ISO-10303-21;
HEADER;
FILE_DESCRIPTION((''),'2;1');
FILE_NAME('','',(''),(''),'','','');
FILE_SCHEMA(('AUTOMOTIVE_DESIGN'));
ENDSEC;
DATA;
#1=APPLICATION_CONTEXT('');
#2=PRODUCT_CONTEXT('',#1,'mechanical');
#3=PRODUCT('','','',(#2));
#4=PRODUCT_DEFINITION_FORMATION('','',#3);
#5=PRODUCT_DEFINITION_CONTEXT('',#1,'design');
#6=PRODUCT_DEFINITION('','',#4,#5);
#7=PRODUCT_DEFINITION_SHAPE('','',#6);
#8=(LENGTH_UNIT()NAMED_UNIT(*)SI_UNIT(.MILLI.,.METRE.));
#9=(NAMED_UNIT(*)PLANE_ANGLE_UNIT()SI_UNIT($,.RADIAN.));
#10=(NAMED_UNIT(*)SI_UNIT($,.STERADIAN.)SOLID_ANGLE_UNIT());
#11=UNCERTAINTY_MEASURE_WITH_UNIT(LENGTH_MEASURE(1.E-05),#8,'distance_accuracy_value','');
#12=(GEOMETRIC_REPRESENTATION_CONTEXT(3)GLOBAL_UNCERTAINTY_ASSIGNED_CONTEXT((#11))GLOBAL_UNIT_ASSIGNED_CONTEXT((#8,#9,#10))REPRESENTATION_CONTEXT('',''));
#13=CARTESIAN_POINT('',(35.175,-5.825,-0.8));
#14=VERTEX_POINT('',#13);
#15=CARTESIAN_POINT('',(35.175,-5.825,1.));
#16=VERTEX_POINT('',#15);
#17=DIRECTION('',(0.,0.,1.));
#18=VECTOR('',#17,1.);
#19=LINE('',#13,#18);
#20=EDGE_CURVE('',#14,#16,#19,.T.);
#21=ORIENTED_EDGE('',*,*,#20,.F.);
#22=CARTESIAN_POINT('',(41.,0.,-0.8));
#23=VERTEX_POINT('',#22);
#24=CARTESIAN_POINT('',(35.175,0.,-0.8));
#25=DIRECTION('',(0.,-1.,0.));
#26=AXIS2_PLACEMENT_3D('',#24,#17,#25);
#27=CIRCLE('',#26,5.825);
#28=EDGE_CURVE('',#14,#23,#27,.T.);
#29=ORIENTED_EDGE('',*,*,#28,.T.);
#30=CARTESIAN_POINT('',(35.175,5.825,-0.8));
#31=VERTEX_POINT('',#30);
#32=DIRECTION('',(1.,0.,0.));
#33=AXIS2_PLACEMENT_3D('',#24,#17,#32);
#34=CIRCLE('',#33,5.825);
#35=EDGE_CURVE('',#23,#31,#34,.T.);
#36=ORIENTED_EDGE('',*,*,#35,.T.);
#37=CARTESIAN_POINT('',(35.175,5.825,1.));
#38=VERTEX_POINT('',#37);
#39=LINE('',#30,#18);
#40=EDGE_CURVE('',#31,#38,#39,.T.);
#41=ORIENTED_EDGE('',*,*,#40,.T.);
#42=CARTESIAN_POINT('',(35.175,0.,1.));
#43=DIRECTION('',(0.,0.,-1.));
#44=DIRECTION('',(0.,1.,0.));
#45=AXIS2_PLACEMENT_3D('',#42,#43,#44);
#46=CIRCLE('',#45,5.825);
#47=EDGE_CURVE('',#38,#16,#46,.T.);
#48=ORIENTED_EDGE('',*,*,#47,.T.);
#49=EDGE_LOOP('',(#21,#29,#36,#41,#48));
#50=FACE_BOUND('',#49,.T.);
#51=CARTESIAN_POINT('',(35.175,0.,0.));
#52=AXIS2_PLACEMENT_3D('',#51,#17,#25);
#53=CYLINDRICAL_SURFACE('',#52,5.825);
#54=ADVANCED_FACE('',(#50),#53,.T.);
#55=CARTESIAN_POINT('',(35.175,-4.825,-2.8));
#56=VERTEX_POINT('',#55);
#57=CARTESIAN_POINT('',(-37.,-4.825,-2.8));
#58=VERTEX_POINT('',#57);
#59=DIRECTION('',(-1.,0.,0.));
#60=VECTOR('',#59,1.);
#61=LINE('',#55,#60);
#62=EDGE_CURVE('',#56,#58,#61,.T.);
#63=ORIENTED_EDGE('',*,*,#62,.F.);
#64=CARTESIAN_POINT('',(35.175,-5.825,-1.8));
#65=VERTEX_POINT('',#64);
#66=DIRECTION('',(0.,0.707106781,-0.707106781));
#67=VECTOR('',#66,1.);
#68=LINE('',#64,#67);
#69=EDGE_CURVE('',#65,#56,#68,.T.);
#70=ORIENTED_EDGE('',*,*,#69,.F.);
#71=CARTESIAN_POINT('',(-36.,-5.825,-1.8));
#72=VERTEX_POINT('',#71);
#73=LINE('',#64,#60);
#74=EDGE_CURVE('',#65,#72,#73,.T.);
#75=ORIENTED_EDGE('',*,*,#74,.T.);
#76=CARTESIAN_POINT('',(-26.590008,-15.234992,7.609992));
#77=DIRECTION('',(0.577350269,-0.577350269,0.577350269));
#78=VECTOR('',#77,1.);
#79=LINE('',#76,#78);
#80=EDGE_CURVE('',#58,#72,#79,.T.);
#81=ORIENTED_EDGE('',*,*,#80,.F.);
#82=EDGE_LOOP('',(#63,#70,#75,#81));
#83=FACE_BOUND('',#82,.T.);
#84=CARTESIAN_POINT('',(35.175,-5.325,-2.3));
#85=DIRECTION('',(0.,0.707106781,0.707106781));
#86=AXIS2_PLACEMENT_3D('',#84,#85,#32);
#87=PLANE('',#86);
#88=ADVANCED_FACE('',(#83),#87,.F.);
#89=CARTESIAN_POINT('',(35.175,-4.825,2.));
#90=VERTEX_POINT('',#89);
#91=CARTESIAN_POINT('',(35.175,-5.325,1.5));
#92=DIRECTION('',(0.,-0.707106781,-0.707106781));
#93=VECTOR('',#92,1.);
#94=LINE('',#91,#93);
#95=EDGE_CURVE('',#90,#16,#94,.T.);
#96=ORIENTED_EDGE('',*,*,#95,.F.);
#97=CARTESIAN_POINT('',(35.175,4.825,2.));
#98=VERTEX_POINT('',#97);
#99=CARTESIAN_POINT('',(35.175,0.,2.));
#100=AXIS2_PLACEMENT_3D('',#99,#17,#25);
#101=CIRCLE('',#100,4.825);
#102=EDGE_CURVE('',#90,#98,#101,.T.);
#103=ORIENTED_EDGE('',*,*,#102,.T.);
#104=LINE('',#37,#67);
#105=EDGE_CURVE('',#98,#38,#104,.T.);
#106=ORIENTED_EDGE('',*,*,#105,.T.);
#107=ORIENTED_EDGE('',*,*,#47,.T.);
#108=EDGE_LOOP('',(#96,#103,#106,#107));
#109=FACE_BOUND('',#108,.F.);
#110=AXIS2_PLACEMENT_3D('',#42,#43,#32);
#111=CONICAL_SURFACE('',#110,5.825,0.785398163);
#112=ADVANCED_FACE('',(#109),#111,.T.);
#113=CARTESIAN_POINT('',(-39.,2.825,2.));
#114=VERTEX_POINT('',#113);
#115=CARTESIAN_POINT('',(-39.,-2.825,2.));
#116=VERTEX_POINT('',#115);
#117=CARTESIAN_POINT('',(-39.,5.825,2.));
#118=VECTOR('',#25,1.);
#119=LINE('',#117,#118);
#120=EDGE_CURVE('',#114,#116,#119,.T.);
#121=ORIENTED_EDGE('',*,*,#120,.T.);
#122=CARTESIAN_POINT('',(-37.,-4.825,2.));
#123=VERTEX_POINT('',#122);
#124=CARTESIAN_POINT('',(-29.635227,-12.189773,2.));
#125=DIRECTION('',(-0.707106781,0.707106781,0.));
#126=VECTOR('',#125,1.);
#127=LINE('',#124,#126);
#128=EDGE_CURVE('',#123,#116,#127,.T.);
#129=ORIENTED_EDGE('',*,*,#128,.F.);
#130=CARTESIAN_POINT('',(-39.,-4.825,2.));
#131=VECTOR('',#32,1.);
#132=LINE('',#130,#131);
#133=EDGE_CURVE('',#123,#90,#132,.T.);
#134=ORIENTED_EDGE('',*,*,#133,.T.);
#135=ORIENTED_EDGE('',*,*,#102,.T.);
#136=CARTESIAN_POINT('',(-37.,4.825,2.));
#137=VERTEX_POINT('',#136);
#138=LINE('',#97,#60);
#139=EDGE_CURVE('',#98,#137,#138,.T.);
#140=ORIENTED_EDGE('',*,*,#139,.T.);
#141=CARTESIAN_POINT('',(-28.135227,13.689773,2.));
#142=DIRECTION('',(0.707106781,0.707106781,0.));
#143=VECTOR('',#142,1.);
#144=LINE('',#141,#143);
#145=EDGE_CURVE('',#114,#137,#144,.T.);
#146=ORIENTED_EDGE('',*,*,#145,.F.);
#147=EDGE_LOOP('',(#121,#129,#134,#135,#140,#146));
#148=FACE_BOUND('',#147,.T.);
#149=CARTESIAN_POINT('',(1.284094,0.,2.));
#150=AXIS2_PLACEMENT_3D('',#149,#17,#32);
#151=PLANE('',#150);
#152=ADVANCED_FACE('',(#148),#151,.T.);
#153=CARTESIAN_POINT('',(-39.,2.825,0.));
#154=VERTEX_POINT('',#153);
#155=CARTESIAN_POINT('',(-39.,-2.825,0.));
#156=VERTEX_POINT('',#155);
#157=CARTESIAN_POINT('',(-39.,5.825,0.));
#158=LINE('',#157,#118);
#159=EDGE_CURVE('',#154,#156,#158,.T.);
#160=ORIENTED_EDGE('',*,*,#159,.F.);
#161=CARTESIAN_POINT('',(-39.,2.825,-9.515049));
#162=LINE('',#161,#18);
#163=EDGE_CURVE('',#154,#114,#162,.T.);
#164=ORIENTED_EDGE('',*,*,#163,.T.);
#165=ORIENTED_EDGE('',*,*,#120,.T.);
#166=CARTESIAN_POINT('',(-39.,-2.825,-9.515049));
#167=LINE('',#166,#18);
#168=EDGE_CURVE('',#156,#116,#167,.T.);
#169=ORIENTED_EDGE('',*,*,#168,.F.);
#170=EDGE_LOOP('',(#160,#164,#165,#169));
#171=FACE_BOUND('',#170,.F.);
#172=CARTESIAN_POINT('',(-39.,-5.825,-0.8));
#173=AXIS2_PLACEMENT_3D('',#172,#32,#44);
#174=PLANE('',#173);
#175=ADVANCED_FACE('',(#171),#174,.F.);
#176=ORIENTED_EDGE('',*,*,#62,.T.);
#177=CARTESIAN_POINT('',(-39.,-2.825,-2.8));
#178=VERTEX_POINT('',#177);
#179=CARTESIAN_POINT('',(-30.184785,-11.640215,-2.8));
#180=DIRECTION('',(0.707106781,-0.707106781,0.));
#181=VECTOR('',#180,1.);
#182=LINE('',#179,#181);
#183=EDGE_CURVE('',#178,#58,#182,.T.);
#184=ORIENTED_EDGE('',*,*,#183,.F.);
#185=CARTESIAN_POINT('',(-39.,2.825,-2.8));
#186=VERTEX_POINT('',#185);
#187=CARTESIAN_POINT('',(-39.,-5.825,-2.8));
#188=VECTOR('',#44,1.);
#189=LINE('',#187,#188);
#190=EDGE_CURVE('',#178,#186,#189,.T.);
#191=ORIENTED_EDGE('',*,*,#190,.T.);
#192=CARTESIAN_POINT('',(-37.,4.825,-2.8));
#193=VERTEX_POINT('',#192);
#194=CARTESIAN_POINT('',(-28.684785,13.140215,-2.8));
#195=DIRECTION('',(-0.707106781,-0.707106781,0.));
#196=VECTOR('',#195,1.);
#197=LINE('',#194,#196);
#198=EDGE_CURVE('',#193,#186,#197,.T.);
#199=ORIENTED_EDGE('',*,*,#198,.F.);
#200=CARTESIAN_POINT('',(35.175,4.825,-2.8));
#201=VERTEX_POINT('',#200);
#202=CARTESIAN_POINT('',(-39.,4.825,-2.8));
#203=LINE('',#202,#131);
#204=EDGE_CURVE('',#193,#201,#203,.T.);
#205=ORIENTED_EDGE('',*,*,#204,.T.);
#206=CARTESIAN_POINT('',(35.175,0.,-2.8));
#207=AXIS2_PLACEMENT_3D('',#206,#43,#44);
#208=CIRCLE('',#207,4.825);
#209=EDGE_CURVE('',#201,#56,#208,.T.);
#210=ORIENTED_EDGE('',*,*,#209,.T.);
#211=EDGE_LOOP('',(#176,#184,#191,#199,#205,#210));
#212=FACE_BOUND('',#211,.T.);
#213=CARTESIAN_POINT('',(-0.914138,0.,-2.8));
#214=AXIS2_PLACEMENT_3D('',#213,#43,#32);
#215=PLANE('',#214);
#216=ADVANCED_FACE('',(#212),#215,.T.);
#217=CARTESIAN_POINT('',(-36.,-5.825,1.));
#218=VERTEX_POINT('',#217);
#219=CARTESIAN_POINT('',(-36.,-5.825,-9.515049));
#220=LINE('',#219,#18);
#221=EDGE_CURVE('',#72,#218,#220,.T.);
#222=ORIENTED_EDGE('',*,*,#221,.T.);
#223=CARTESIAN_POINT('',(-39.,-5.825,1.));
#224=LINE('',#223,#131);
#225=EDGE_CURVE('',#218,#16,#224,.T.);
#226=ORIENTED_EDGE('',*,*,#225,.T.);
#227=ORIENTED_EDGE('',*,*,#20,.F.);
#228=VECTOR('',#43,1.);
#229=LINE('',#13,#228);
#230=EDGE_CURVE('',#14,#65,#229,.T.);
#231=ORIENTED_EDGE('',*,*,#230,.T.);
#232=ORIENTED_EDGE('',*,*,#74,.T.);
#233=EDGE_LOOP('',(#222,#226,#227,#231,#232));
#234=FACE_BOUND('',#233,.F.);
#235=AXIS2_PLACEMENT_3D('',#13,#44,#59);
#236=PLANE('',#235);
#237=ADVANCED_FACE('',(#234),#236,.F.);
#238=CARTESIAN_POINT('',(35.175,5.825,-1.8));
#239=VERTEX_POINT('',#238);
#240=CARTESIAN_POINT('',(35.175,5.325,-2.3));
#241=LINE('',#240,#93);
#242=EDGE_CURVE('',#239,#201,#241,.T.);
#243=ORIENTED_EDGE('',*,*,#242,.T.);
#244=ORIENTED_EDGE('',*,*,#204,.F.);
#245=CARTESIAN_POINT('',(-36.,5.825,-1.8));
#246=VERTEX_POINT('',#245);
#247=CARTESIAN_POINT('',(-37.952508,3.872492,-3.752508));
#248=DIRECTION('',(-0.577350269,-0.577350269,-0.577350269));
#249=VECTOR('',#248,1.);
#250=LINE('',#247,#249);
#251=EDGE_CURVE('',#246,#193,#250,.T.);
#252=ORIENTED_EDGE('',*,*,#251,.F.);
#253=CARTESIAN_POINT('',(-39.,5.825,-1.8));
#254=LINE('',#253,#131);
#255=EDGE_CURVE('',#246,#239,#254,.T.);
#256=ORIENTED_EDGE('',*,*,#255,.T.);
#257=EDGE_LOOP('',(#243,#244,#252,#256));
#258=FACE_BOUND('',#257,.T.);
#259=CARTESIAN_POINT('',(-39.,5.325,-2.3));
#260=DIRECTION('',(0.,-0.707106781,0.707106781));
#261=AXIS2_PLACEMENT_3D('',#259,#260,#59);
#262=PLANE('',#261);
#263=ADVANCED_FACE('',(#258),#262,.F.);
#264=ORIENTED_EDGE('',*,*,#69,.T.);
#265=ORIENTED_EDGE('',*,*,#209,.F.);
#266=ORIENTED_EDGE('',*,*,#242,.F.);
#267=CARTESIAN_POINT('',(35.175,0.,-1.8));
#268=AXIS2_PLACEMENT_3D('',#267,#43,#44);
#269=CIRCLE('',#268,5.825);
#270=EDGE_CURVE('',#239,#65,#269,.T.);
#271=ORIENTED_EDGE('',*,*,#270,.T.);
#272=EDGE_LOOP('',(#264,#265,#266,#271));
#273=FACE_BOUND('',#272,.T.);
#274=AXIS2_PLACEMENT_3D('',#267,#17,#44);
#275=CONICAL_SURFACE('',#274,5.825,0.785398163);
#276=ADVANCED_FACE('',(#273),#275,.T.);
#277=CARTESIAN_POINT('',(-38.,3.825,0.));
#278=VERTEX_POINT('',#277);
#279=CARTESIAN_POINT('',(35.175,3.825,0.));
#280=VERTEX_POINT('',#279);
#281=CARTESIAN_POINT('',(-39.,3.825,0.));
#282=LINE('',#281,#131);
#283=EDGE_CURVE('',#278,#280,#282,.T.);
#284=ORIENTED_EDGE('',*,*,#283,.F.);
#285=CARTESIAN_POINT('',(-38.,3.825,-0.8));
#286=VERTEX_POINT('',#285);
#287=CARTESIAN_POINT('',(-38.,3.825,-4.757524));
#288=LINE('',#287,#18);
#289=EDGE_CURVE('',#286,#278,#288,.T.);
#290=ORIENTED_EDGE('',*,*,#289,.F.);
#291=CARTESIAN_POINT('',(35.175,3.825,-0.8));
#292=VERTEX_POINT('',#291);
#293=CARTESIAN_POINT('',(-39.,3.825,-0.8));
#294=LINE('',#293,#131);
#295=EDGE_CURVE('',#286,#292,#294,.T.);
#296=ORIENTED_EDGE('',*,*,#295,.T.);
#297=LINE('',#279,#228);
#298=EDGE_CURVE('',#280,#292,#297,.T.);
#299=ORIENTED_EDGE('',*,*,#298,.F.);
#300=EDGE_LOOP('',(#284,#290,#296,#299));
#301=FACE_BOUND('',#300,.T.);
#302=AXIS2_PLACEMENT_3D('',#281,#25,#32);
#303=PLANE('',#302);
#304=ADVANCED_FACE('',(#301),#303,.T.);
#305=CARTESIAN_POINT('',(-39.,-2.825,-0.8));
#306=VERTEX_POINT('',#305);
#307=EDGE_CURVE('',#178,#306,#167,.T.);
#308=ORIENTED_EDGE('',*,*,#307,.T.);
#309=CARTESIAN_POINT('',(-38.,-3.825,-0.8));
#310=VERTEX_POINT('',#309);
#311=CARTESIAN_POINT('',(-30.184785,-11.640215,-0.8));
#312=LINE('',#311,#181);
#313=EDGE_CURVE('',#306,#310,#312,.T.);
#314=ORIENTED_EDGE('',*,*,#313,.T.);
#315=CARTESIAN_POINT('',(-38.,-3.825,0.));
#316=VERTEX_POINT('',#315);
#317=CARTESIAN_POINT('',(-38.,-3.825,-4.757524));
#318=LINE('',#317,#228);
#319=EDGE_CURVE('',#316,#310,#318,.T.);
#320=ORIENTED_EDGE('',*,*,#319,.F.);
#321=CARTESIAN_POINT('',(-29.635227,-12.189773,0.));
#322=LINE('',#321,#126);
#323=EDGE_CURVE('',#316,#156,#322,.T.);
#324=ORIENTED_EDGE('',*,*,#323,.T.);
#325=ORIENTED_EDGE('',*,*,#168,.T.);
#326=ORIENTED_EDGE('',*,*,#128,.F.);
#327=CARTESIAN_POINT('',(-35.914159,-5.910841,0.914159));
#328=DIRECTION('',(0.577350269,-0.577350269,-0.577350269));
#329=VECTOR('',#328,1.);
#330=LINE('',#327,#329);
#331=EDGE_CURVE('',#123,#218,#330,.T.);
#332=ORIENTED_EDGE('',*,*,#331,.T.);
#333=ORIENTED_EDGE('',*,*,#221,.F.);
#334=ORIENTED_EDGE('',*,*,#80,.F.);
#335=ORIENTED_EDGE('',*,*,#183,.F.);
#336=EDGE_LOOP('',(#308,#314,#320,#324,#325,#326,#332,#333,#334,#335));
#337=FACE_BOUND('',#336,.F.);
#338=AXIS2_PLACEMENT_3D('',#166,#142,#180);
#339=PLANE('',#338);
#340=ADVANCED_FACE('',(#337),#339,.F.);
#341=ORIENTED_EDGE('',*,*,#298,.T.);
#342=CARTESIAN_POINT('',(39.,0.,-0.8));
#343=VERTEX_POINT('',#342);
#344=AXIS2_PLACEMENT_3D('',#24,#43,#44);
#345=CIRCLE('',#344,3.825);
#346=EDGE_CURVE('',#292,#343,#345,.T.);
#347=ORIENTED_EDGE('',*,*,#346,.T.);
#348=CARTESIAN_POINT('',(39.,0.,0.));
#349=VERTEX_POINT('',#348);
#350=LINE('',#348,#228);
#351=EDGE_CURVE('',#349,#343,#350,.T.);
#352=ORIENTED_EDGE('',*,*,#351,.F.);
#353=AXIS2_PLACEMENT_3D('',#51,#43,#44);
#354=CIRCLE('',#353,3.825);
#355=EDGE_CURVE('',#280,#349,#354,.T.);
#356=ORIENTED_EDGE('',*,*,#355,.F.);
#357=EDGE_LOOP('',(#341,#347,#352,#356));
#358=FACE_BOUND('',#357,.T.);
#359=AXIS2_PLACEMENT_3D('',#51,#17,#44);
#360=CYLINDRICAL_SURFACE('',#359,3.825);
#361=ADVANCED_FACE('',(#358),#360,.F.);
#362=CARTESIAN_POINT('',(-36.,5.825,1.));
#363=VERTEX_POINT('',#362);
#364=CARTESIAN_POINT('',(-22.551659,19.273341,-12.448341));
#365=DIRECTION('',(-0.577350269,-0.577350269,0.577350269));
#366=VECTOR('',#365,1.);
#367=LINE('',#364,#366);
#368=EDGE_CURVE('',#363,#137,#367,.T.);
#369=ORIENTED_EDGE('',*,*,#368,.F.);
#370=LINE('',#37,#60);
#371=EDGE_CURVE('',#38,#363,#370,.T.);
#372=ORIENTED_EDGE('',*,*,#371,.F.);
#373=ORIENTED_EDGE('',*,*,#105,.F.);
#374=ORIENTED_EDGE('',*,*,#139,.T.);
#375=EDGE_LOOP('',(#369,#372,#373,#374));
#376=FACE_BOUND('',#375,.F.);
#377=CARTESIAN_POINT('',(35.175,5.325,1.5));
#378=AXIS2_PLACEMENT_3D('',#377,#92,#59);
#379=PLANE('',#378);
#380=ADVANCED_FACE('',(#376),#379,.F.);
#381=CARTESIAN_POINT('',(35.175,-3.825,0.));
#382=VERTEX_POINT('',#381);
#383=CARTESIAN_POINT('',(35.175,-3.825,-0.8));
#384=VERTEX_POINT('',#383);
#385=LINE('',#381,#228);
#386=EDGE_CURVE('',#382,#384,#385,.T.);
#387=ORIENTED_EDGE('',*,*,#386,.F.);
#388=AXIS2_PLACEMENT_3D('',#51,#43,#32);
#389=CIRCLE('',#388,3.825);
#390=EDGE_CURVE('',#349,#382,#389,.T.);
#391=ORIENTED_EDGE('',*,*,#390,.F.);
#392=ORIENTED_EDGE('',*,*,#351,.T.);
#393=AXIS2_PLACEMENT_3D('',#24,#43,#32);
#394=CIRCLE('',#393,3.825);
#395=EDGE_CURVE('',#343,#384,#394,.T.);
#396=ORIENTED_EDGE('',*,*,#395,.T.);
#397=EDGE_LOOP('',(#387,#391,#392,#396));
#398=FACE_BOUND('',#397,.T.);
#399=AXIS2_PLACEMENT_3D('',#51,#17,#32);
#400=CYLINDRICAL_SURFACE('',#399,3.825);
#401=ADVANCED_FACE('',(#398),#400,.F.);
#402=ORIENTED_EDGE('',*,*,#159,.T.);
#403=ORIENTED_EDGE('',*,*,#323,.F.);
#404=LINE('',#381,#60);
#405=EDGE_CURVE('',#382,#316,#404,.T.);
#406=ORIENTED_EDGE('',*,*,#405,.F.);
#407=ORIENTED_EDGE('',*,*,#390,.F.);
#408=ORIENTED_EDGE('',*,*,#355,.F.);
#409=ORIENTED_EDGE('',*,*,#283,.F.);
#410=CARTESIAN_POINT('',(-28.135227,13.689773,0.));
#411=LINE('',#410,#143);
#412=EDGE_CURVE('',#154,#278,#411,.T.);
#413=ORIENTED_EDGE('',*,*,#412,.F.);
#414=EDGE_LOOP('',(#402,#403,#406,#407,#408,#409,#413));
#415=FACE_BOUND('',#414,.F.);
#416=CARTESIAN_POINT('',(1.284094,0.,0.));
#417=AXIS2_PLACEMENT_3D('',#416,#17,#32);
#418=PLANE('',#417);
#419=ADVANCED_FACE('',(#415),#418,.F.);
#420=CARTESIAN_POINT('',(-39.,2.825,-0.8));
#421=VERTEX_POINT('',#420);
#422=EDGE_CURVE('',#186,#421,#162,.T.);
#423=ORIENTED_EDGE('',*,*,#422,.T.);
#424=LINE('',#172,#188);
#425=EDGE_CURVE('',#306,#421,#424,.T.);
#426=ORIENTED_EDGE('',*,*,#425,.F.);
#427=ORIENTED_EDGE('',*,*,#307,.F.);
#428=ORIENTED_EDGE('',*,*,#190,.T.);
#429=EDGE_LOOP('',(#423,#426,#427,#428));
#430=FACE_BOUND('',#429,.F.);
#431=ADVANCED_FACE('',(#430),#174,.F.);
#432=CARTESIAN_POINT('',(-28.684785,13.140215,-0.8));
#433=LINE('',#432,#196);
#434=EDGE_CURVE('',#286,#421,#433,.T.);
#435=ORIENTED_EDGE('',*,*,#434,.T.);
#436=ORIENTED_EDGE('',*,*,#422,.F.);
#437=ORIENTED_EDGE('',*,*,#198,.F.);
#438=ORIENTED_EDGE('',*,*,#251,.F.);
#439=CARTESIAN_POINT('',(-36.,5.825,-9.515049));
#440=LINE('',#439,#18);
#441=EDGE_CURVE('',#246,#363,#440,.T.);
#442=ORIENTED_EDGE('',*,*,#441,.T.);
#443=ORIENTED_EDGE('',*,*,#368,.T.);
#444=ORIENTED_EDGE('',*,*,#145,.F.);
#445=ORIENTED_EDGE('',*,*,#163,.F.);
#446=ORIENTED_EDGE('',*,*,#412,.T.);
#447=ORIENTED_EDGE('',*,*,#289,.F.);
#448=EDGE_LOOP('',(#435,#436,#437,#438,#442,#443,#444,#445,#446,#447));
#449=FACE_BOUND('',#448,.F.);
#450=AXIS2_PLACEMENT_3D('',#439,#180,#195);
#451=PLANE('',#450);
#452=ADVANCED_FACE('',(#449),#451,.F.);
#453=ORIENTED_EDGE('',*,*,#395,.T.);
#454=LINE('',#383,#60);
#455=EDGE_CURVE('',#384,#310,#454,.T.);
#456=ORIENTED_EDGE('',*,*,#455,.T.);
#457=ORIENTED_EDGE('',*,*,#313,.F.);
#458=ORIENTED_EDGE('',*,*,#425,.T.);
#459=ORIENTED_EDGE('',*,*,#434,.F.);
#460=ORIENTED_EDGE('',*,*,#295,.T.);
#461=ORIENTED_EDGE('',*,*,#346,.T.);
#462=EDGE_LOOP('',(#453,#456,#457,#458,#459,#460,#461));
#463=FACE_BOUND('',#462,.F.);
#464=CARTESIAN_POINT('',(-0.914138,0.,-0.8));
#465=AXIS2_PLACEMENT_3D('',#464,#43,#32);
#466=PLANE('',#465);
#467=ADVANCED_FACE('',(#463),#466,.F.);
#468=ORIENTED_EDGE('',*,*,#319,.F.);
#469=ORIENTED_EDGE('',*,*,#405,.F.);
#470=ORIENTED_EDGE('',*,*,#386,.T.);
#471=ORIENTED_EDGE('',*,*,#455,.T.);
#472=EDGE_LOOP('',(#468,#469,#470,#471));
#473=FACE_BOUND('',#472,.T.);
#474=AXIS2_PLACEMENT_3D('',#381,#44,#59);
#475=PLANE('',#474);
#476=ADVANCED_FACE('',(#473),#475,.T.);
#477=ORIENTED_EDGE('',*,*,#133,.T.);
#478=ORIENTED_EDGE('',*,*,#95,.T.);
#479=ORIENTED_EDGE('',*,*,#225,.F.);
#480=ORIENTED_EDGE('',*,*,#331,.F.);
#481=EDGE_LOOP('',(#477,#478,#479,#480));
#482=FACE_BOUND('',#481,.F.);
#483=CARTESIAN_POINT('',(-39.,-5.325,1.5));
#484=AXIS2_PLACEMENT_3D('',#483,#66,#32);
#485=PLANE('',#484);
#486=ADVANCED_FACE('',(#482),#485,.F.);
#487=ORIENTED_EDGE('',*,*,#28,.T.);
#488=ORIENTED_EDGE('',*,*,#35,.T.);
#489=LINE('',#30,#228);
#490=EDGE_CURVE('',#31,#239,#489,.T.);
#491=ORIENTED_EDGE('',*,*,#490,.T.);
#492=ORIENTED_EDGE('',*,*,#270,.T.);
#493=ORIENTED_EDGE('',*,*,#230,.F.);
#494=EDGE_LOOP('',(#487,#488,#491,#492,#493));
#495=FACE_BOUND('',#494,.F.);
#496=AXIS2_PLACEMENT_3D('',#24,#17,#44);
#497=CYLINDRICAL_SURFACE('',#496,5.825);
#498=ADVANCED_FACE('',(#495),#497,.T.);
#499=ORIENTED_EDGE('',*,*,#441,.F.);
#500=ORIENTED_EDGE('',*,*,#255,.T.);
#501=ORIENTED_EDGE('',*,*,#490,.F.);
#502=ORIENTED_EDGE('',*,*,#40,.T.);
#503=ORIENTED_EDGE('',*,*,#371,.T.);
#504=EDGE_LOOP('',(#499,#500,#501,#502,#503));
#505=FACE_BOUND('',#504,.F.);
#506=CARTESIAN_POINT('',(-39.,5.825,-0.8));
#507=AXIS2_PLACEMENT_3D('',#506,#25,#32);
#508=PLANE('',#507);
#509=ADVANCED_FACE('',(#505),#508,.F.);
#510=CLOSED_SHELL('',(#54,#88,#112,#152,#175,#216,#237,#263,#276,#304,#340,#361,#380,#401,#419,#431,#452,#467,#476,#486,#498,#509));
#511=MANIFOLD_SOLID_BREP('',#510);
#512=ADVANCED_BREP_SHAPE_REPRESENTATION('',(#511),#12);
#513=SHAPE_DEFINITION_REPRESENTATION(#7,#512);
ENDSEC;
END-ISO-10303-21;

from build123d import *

# Parameters (mm, degrees)
F1_DEPTH    = 2
F2_DEPTH    = 0.8
F4_DEPTH    = 2
F5_SIZE     = 1
F6_T1_DEPTH = 18.2300979278


# Not quite as in the source:
# - a fillet or chamfer that OpenCascade refuses, or shapes differently, is made with other operations: its cross-section is extruded or revolved along the edge and cut away or added


with BuildPart() as f1:
    # F0 (on Top) → F1 (new body)
    with BuildSketch(Plane.XY):
        with BuildLine():
            Line((35.175, -3.825), (-39, -3.825))
            Line((-39, -3.825), (-39, -5.825))
            Line((-39, -5.825), (35.175, -5.825))
            ThreePointArc((35.175, -5.825), (39.2938970004, -4.1188970004), (41, 0))
            ThreePointArc((41, 0), (39.2938970004, 4.1188970004), (35.175, 5.825))
            Line((35.175, 5.825), (-39, 5.825))
            Line((-39, 5.825), (-39, 3.825))
            Line((-39, 3.825), (35.175, 3.825))
            ThreePointArc((35.175, 3.825), (37.879683438, 2.704683438), (39, 0))
            ThreePointArc((39, 0), (37.879683438, -2.704683438), (35.175, -3.825))
        make_face()
        with BuildLine():
            Line((-39, 3.825), (-39, -3.825))
            Line((-39, -3.825), (35.175, -3.825))
            ThreePointArc((35.175, -3.825), (37.879683438, -2.704683438), (39, 0))
            ThreePointArc((39, 0), (37.879683438, 2.704683438), (35.175, 3.825))
            Line((35.175, 3.825), (-39, 3.825))
        make_face()
    extrude(amount=F1_DEPTH)

    # F0 (on Top) → F2 (join)
    with BuildSketch(Plane.XY):
        with BuildLine():
            Line((35.175, -3.825), (-39, -3.825))
            Line((-39, -3.825), (-39, -5.825))
            Line((-39, -5.825), (35.175, -5.825))
            ThreePointArc((35.175, -5.825), (39.2938970004, -4.1188970004), (41, 0))
            ThreePointArc((41, 0), (39.2938970004, 4.1188970004), (35.175, 5.825))
            Line((35.175, 5.825), (-39, 5.825))
            Line((-39, 5.825), (-39, 3.825))
            Line((-39, 3.825), (35.175, 3.825))
            ThreePointArc((35.175, 3.825), (37.879683438, 2.704683438), (39, 0))
            ThreePointArc((39, 0), (37.879683438, -2.704683438), (35.175, -3.825))
        make_face()
    extrude(amount=-F2_DEPTH)

    # F3 (on face) → F4 (join)
    with BuildSketch(Plane(origin=(0, 0, -0.8), x_dir=(1, 0, 0), z_dir=(0, 0, -1))):
        with BuildLine():
            Line((-39, 3.825), (-39, -3.825))
            Line((-39, -3.825), (35.175, -3.825))
            ThreePointArc((35.175, -3.825), (39, 0), (35.175, 3.825))
            Line((35.175, 3.825), (-39, 3.825))
        make_face()
        with BuildLine():
            Line((35.175, -3.825), (-39, -3.825))
            Line((-39, -3.825), (-39, -5.825))
            Line((-39, -5.825), (35.175, -5.825))
            ThreePointArc((35.175, -5.825), (41, 0), (35.175, 5.825))
            Line((35.175, 5.825), (-39, 5.825))
            Line((-39, 5.825), (-39, 3.825))
            Line((-39, 3.825), (35.175, 3.825))
            ThreePointArc((35.175, 3.825), (39, 0), (35.175, -3.825))
        make_face()
    extrude(amount=F4_DEPTH)

    # F5
    f5_edges = [f1.edges().sort_by_distance(p)[0] for p in [
        (-1.9125, -5.825, -2.8),
        (-1.9125, -5.825, 2),
    ]]
    chamfer(f5_edges, length=F5_SIZE)

    # F6: chamfer of 3 on 2 edges, made by hand

    # F6_s2 → F6_t1 (cut)
    with BuildSketch(Plane.XY.offset(-9.5150489639)):
        Polygon((-39, -2.825), (-36, -5.825), (-39, -5.825), align=None)
        Polygon((-36, 5.825), (-39, 2.825), (-39, 5.825), align=None)
    extrude(amount=F6_T1_DEPTH, mode=Mode.SUBTRACT)


solid = f1.part
